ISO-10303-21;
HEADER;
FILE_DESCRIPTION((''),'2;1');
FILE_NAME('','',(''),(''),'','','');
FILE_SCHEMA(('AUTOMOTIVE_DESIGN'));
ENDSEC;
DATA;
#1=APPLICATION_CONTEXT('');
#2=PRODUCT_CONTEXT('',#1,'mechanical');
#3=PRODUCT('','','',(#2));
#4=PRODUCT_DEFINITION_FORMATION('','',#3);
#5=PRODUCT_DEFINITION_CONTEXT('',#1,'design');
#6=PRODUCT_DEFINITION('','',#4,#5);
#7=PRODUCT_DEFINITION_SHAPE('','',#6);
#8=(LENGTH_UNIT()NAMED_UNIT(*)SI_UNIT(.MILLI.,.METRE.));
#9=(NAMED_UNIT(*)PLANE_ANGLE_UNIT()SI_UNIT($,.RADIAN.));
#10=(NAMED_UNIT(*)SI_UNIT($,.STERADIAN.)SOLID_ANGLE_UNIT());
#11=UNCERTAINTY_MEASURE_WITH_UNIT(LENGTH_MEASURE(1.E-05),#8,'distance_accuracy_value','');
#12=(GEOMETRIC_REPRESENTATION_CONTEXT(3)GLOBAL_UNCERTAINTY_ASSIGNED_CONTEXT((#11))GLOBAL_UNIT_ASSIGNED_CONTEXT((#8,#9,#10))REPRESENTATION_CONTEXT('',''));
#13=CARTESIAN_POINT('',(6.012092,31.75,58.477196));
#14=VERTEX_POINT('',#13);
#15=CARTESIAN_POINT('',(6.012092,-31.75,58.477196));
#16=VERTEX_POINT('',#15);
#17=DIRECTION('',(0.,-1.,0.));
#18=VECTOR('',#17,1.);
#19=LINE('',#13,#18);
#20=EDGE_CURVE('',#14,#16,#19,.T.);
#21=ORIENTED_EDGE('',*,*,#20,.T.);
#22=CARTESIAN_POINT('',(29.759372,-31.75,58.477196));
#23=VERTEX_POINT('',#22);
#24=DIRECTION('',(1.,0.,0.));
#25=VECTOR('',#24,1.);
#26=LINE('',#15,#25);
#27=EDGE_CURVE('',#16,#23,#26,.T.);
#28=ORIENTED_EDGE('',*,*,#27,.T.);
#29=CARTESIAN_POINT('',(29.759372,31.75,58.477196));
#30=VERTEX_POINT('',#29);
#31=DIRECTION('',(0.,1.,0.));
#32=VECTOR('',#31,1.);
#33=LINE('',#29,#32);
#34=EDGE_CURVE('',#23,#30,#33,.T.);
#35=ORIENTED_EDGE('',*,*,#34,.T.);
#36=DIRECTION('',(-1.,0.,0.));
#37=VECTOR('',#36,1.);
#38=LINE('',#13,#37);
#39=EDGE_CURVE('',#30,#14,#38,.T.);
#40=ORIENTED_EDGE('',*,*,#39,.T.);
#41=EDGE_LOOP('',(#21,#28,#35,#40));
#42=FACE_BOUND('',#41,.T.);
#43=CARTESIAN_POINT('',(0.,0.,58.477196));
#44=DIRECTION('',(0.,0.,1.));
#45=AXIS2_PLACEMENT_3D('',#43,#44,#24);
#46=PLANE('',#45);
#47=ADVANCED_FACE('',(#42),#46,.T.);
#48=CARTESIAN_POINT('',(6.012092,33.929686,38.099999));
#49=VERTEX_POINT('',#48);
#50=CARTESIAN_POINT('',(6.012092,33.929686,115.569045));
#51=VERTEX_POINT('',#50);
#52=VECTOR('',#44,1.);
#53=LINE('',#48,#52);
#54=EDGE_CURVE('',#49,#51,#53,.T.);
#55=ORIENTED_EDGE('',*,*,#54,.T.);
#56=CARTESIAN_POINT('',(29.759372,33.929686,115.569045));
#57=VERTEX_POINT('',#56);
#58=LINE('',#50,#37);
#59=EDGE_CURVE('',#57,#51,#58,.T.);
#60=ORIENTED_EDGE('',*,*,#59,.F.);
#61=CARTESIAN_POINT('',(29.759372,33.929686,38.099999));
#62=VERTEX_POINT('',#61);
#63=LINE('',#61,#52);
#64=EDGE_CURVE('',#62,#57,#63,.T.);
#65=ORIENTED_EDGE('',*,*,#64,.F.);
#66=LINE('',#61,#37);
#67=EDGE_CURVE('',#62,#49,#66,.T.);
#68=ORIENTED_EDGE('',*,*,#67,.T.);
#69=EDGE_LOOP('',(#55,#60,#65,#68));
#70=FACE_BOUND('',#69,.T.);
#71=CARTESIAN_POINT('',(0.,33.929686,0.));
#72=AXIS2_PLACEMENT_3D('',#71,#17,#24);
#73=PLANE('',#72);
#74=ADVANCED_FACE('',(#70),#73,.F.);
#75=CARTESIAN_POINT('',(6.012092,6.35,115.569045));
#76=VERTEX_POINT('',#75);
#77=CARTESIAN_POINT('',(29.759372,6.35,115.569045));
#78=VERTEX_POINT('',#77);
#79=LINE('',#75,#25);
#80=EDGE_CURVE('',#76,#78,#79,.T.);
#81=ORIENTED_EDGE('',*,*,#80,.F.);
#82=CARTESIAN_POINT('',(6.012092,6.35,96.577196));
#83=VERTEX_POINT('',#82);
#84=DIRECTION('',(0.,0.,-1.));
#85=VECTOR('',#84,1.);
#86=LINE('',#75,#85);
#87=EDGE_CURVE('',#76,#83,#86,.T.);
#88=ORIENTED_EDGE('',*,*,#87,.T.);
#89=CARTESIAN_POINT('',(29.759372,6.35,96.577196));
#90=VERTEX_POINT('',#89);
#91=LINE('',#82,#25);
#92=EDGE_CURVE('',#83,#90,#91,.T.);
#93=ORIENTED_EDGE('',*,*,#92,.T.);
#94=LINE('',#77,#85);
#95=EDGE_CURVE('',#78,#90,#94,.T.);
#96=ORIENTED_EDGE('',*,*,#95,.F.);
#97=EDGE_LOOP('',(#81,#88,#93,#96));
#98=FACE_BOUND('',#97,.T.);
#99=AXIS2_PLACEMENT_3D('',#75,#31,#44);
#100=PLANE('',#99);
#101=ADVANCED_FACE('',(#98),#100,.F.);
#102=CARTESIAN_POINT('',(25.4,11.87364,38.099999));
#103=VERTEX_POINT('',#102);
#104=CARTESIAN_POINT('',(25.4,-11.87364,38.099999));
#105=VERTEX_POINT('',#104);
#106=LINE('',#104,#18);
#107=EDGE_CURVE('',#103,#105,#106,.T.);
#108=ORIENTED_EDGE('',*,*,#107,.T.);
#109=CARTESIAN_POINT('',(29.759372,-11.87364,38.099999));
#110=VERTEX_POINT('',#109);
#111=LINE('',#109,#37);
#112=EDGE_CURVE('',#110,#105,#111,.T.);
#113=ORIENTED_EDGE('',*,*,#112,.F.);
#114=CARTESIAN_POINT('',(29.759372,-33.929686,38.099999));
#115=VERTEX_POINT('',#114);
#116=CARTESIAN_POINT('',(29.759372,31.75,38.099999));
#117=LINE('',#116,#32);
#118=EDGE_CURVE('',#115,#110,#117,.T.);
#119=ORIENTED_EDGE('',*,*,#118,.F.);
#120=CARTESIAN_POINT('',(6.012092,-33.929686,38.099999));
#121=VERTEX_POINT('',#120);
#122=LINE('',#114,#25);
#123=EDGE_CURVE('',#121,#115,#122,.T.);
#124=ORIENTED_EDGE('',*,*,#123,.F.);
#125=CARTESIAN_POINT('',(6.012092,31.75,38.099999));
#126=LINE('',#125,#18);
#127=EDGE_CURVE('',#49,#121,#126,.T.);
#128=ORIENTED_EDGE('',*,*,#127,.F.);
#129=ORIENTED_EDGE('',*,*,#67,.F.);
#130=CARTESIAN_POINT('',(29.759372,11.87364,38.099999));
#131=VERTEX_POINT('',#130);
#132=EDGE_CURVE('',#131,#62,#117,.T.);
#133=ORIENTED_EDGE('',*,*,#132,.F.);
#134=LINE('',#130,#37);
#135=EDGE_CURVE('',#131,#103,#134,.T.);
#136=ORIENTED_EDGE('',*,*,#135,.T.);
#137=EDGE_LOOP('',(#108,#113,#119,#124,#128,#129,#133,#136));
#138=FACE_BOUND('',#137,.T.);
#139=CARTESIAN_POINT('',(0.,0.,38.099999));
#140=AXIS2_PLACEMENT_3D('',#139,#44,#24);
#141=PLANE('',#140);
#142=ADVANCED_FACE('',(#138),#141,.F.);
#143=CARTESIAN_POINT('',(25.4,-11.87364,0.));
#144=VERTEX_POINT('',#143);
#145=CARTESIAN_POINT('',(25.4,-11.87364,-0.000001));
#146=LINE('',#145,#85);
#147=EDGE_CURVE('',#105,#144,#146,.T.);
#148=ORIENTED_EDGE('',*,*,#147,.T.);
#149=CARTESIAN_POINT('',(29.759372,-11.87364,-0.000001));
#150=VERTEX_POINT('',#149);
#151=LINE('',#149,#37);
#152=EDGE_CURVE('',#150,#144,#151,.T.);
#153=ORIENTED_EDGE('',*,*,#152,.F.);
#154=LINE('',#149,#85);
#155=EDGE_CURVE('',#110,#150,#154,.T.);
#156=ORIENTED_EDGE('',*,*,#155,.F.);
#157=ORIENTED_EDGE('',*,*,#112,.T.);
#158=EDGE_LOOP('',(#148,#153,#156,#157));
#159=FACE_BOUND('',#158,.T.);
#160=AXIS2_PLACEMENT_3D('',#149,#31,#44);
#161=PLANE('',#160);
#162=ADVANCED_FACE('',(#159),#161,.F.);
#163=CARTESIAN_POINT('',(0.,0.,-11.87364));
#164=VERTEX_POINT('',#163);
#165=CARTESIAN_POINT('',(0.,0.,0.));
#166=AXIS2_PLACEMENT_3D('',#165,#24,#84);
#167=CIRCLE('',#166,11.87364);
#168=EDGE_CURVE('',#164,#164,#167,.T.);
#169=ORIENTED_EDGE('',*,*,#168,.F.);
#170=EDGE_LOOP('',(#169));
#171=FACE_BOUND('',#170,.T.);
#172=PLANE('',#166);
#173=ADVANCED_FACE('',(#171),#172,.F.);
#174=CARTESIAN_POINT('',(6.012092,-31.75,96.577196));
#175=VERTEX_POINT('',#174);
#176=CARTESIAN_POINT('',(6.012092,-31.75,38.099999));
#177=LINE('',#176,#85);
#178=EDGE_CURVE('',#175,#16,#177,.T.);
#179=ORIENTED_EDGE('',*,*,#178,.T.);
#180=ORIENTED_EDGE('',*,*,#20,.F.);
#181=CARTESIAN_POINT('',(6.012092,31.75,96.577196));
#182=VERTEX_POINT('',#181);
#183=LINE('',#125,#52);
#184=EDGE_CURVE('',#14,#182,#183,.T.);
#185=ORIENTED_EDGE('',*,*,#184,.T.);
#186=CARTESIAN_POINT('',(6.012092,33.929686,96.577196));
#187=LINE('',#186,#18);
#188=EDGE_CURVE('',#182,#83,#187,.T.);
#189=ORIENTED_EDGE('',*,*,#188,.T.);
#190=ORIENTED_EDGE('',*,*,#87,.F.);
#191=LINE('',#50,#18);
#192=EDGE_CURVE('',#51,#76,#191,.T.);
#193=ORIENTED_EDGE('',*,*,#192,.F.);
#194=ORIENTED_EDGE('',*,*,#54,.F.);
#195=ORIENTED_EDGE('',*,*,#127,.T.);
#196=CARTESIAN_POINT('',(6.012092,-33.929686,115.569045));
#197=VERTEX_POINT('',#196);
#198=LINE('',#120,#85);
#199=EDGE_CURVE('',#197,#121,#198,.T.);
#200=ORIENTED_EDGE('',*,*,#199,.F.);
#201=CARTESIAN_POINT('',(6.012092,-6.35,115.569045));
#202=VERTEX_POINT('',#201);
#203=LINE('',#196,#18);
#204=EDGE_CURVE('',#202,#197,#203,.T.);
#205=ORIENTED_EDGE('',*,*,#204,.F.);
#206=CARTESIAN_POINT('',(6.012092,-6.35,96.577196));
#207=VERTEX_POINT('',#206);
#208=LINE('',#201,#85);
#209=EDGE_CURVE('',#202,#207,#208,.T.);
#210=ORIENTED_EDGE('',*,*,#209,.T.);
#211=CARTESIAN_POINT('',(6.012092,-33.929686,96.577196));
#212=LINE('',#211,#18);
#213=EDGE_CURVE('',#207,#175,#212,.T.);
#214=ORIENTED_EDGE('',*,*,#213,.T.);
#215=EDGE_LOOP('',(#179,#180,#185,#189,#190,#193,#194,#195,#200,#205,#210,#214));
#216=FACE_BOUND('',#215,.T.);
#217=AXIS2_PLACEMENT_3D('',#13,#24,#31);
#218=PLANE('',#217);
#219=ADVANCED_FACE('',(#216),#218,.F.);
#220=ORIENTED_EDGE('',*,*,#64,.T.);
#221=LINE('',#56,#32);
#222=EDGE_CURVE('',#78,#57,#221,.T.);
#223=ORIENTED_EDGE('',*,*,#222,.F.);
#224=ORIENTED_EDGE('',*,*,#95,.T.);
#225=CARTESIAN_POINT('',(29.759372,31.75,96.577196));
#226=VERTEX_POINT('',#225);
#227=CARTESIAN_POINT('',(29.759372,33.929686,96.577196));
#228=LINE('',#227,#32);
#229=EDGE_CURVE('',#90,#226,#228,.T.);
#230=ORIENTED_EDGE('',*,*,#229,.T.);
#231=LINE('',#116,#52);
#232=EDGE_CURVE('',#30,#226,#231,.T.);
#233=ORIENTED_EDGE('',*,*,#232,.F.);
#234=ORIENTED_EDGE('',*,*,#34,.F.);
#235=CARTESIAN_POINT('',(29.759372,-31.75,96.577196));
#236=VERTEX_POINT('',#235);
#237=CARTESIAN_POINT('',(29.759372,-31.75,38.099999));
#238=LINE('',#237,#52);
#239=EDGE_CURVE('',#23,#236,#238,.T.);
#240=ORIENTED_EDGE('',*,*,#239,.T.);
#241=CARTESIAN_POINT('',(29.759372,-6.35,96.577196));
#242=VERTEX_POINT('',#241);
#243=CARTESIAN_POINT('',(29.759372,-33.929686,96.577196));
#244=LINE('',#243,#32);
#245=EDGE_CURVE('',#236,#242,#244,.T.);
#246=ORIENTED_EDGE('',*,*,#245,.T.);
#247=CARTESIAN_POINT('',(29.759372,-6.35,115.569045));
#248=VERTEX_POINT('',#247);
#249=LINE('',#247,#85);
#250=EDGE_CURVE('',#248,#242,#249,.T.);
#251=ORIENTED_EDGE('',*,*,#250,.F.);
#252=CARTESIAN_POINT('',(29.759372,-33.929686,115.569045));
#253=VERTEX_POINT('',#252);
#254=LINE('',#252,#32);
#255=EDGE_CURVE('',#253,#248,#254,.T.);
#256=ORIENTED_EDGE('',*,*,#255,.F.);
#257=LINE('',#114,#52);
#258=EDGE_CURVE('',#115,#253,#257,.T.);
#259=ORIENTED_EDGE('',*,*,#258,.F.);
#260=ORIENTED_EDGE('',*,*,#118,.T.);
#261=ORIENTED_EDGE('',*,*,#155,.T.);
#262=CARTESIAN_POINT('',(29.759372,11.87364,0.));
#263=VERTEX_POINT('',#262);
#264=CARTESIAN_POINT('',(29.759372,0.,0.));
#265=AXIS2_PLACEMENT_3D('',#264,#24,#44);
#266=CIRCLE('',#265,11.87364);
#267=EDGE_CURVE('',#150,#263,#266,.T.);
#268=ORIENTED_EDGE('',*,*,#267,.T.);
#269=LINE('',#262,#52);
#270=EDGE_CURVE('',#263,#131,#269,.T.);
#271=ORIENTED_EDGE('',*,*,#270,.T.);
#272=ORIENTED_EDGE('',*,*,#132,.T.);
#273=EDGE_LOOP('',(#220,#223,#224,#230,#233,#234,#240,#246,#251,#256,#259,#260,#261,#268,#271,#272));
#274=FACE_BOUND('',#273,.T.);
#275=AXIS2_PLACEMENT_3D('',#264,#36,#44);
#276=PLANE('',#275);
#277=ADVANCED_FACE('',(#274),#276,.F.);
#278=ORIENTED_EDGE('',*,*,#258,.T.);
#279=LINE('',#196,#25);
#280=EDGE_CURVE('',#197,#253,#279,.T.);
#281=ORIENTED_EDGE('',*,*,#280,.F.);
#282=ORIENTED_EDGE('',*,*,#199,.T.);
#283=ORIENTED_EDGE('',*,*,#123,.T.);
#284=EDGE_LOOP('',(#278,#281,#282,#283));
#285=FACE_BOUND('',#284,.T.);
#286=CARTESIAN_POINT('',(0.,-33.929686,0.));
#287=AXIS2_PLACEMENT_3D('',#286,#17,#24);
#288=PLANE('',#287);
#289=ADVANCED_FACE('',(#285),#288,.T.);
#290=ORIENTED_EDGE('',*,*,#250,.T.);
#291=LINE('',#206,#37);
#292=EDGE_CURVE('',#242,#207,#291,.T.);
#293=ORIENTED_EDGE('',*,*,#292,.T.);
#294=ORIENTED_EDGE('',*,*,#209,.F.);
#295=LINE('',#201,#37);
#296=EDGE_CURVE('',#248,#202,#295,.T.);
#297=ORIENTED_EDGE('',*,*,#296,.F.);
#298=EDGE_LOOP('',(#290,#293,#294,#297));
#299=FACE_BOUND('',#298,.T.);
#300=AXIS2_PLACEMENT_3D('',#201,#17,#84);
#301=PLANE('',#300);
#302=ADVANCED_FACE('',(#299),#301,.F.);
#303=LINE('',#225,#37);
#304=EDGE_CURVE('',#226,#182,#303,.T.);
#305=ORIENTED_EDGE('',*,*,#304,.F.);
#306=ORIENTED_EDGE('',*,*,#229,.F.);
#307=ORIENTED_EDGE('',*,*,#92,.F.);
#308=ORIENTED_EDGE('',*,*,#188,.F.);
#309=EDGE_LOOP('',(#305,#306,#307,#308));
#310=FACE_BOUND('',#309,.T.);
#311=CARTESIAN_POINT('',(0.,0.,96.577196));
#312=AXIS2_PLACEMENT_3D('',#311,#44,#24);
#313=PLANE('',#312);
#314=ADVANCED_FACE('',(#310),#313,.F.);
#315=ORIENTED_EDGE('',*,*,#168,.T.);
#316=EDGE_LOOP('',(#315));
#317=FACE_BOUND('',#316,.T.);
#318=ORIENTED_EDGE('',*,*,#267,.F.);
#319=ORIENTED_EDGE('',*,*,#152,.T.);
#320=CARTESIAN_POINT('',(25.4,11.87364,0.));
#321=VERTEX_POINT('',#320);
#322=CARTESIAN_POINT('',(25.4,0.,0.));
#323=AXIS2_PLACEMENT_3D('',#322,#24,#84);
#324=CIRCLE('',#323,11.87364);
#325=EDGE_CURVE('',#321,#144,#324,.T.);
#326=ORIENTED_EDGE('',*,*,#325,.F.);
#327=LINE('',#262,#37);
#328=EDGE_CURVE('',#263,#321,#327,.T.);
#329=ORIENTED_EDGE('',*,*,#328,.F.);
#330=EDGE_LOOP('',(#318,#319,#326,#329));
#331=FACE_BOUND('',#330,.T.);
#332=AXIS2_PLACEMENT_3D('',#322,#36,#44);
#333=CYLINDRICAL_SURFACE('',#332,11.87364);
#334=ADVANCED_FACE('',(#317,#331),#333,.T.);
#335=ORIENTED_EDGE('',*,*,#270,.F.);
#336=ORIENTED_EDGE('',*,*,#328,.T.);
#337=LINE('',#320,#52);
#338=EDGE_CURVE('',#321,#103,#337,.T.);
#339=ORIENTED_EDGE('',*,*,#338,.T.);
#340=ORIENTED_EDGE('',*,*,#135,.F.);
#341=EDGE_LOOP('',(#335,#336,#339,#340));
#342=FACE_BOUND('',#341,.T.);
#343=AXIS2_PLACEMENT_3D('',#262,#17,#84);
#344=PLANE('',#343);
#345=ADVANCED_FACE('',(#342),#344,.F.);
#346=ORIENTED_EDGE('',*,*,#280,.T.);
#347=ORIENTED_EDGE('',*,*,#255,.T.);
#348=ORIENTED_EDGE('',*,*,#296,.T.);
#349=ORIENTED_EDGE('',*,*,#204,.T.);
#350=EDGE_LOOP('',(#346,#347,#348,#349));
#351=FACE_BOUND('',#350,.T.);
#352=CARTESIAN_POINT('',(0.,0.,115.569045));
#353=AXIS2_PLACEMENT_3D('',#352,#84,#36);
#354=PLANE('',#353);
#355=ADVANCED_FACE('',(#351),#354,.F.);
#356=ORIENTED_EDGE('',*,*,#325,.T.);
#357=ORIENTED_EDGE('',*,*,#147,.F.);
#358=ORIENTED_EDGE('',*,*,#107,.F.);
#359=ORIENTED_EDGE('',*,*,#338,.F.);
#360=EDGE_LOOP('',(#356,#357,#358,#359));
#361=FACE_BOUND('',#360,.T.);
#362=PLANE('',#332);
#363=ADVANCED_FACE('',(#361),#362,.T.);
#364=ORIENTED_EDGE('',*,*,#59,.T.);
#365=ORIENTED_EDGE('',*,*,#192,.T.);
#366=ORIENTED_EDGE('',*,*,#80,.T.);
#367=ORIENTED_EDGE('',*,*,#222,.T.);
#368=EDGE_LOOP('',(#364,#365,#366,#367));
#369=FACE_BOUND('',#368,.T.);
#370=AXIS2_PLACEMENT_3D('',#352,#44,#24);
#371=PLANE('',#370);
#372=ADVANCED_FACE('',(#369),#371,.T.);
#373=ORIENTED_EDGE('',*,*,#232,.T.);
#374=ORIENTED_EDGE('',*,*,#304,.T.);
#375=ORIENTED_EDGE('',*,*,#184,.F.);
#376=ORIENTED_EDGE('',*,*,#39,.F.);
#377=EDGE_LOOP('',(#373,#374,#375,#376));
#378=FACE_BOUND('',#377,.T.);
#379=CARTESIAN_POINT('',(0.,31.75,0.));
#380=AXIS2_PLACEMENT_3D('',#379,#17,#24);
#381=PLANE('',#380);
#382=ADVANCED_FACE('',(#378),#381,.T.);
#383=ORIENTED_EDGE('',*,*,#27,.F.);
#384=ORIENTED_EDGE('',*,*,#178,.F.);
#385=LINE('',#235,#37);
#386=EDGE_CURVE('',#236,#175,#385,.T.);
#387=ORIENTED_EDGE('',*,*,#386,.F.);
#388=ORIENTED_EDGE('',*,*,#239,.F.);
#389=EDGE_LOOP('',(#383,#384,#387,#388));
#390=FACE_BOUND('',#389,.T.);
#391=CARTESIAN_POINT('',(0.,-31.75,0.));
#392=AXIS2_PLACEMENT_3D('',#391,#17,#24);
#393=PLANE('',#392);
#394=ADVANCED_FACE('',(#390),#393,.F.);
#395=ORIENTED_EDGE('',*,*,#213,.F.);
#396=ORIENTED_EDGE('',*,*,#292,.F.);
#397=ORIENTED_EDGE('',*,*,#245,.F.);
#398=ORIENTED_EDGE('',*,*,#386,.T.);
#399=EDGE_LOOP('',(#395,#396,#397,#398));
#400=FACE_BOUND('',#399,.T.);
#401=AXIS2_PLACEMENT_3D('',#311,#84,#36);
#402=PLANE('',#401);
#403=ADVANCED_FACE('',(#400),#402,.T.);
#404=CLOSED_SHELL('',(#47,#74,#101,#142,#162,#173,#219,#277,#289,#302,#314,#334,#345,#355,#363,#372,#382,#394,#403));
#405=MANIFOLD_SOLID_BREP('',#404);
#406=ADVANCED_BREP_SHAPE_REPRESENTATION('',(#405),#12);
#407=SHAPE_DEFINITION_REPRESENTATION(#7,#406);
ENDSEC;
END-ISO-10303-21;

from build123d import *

# Parameters (mm, degrees)
SKETCH1_R           = 11.873640169
BOSS_EXTRUDE1_DEPTH = 25.4
BOSS_EXTRUDE2_DEPTH = 4.359372013
SKETCH3_W           = 23.747280338
SKETCH3_H           = 63.5
BOSS_EXTRUDE3_DEPTH = 20.377197654
SKETCH6_W           = 23.747280338
SKETCH6_H           = 58.477197654
BOSS_EXTRUDE4_DEPTH = 2.179686006
SKETCH7_W           = 23.747280338
SKETCH7_H           = 58.477197654
BOSS_EXTRUDE5_DEPTH = 2.179686006
SKETCH8_W           = 23.747280338
SKETCH8_H           = 27.579686006
BOSS_EXTRUDE6_DEPTH = 18.991849144


with BuildPart() as part:
    # Sketch1 → Boss-Extrude1 (new body)
    with BuildSketch(Plane.YZ):
        Circle(SKETCH1_R)
    extrude(amount=BOSS_EXTRUDE1_DEPTH)

    # Sketch2 → Boss-Extrude2 (add)
    with BuildSketch(Plane.YZ.offset(25.4)):
        with BuildLine():
            Line((-11.873640169, -1.316e-06), (-11.873640169, 38.099998684))
            Line((-11.873640169, 38.099998684), (11.873640169, 38.099998684))
            Line((11.873640169, 38.099998684), (11.873640169, 0))
            ThreePointArc((11.873640169, 0), (6.58e-07, -11.873640169), (-11.873640169, -1.316e-06))
        make_face()
    extrude(amount=BOSS_EXTRUDE2_DEPTH)

    # Sketch3 → Boss-Extrude3 (add)
    with BuildSketch(Plane.XY.offset(38.099998684)):
        with Locations((17.885731844, 0)):
            Rectangle(SKETCH3_W, SKETCH3_H)
    extrude(amount=BOSS_EXTRUDE3_DEPTH)

    # Sketch6 → Boss-Extrude4 (add)
    with BuildSketch(Plane(origin=(0, 31.75, 0), x_dir=(-1, 0, 0), z_dir=(0, 1, 0))):
        with Locations((-17.885731844, 67.338597511)):
            Rectangle(SKETCH6_W, SKETCH6_H)
    extrude(amount=BOSS_EXTRUDE4_DEPTH)

    # Sketch7 → Boss-Extrude5 (add)
    with BuildSketch(Plane.XZ.offset(31.75)):
        with Locations((17.885731844, 67.338597511)):
            Rectangle(SKETCH7_W, SKETCH7_H)
    extrude(amount=BOSS_EXTRUDE5_DEPTH)

    # Sketch8 → Boss-Extrude6 (add)
    with BuildSketch(Plane.XY.offset(96.577196338)):
        with Locations((17.885731844, 20.139843003)):
            Rectangle(SKETCH8_W, SKETCH8_H)
        with Locations((17.885731844, -20.139843003)):
            Rectangle(SKETCH8_W, SKETCH8_H)
    extrude(amount=BOSS_EXTRUDE6_DEPTH)


solid = part.part
